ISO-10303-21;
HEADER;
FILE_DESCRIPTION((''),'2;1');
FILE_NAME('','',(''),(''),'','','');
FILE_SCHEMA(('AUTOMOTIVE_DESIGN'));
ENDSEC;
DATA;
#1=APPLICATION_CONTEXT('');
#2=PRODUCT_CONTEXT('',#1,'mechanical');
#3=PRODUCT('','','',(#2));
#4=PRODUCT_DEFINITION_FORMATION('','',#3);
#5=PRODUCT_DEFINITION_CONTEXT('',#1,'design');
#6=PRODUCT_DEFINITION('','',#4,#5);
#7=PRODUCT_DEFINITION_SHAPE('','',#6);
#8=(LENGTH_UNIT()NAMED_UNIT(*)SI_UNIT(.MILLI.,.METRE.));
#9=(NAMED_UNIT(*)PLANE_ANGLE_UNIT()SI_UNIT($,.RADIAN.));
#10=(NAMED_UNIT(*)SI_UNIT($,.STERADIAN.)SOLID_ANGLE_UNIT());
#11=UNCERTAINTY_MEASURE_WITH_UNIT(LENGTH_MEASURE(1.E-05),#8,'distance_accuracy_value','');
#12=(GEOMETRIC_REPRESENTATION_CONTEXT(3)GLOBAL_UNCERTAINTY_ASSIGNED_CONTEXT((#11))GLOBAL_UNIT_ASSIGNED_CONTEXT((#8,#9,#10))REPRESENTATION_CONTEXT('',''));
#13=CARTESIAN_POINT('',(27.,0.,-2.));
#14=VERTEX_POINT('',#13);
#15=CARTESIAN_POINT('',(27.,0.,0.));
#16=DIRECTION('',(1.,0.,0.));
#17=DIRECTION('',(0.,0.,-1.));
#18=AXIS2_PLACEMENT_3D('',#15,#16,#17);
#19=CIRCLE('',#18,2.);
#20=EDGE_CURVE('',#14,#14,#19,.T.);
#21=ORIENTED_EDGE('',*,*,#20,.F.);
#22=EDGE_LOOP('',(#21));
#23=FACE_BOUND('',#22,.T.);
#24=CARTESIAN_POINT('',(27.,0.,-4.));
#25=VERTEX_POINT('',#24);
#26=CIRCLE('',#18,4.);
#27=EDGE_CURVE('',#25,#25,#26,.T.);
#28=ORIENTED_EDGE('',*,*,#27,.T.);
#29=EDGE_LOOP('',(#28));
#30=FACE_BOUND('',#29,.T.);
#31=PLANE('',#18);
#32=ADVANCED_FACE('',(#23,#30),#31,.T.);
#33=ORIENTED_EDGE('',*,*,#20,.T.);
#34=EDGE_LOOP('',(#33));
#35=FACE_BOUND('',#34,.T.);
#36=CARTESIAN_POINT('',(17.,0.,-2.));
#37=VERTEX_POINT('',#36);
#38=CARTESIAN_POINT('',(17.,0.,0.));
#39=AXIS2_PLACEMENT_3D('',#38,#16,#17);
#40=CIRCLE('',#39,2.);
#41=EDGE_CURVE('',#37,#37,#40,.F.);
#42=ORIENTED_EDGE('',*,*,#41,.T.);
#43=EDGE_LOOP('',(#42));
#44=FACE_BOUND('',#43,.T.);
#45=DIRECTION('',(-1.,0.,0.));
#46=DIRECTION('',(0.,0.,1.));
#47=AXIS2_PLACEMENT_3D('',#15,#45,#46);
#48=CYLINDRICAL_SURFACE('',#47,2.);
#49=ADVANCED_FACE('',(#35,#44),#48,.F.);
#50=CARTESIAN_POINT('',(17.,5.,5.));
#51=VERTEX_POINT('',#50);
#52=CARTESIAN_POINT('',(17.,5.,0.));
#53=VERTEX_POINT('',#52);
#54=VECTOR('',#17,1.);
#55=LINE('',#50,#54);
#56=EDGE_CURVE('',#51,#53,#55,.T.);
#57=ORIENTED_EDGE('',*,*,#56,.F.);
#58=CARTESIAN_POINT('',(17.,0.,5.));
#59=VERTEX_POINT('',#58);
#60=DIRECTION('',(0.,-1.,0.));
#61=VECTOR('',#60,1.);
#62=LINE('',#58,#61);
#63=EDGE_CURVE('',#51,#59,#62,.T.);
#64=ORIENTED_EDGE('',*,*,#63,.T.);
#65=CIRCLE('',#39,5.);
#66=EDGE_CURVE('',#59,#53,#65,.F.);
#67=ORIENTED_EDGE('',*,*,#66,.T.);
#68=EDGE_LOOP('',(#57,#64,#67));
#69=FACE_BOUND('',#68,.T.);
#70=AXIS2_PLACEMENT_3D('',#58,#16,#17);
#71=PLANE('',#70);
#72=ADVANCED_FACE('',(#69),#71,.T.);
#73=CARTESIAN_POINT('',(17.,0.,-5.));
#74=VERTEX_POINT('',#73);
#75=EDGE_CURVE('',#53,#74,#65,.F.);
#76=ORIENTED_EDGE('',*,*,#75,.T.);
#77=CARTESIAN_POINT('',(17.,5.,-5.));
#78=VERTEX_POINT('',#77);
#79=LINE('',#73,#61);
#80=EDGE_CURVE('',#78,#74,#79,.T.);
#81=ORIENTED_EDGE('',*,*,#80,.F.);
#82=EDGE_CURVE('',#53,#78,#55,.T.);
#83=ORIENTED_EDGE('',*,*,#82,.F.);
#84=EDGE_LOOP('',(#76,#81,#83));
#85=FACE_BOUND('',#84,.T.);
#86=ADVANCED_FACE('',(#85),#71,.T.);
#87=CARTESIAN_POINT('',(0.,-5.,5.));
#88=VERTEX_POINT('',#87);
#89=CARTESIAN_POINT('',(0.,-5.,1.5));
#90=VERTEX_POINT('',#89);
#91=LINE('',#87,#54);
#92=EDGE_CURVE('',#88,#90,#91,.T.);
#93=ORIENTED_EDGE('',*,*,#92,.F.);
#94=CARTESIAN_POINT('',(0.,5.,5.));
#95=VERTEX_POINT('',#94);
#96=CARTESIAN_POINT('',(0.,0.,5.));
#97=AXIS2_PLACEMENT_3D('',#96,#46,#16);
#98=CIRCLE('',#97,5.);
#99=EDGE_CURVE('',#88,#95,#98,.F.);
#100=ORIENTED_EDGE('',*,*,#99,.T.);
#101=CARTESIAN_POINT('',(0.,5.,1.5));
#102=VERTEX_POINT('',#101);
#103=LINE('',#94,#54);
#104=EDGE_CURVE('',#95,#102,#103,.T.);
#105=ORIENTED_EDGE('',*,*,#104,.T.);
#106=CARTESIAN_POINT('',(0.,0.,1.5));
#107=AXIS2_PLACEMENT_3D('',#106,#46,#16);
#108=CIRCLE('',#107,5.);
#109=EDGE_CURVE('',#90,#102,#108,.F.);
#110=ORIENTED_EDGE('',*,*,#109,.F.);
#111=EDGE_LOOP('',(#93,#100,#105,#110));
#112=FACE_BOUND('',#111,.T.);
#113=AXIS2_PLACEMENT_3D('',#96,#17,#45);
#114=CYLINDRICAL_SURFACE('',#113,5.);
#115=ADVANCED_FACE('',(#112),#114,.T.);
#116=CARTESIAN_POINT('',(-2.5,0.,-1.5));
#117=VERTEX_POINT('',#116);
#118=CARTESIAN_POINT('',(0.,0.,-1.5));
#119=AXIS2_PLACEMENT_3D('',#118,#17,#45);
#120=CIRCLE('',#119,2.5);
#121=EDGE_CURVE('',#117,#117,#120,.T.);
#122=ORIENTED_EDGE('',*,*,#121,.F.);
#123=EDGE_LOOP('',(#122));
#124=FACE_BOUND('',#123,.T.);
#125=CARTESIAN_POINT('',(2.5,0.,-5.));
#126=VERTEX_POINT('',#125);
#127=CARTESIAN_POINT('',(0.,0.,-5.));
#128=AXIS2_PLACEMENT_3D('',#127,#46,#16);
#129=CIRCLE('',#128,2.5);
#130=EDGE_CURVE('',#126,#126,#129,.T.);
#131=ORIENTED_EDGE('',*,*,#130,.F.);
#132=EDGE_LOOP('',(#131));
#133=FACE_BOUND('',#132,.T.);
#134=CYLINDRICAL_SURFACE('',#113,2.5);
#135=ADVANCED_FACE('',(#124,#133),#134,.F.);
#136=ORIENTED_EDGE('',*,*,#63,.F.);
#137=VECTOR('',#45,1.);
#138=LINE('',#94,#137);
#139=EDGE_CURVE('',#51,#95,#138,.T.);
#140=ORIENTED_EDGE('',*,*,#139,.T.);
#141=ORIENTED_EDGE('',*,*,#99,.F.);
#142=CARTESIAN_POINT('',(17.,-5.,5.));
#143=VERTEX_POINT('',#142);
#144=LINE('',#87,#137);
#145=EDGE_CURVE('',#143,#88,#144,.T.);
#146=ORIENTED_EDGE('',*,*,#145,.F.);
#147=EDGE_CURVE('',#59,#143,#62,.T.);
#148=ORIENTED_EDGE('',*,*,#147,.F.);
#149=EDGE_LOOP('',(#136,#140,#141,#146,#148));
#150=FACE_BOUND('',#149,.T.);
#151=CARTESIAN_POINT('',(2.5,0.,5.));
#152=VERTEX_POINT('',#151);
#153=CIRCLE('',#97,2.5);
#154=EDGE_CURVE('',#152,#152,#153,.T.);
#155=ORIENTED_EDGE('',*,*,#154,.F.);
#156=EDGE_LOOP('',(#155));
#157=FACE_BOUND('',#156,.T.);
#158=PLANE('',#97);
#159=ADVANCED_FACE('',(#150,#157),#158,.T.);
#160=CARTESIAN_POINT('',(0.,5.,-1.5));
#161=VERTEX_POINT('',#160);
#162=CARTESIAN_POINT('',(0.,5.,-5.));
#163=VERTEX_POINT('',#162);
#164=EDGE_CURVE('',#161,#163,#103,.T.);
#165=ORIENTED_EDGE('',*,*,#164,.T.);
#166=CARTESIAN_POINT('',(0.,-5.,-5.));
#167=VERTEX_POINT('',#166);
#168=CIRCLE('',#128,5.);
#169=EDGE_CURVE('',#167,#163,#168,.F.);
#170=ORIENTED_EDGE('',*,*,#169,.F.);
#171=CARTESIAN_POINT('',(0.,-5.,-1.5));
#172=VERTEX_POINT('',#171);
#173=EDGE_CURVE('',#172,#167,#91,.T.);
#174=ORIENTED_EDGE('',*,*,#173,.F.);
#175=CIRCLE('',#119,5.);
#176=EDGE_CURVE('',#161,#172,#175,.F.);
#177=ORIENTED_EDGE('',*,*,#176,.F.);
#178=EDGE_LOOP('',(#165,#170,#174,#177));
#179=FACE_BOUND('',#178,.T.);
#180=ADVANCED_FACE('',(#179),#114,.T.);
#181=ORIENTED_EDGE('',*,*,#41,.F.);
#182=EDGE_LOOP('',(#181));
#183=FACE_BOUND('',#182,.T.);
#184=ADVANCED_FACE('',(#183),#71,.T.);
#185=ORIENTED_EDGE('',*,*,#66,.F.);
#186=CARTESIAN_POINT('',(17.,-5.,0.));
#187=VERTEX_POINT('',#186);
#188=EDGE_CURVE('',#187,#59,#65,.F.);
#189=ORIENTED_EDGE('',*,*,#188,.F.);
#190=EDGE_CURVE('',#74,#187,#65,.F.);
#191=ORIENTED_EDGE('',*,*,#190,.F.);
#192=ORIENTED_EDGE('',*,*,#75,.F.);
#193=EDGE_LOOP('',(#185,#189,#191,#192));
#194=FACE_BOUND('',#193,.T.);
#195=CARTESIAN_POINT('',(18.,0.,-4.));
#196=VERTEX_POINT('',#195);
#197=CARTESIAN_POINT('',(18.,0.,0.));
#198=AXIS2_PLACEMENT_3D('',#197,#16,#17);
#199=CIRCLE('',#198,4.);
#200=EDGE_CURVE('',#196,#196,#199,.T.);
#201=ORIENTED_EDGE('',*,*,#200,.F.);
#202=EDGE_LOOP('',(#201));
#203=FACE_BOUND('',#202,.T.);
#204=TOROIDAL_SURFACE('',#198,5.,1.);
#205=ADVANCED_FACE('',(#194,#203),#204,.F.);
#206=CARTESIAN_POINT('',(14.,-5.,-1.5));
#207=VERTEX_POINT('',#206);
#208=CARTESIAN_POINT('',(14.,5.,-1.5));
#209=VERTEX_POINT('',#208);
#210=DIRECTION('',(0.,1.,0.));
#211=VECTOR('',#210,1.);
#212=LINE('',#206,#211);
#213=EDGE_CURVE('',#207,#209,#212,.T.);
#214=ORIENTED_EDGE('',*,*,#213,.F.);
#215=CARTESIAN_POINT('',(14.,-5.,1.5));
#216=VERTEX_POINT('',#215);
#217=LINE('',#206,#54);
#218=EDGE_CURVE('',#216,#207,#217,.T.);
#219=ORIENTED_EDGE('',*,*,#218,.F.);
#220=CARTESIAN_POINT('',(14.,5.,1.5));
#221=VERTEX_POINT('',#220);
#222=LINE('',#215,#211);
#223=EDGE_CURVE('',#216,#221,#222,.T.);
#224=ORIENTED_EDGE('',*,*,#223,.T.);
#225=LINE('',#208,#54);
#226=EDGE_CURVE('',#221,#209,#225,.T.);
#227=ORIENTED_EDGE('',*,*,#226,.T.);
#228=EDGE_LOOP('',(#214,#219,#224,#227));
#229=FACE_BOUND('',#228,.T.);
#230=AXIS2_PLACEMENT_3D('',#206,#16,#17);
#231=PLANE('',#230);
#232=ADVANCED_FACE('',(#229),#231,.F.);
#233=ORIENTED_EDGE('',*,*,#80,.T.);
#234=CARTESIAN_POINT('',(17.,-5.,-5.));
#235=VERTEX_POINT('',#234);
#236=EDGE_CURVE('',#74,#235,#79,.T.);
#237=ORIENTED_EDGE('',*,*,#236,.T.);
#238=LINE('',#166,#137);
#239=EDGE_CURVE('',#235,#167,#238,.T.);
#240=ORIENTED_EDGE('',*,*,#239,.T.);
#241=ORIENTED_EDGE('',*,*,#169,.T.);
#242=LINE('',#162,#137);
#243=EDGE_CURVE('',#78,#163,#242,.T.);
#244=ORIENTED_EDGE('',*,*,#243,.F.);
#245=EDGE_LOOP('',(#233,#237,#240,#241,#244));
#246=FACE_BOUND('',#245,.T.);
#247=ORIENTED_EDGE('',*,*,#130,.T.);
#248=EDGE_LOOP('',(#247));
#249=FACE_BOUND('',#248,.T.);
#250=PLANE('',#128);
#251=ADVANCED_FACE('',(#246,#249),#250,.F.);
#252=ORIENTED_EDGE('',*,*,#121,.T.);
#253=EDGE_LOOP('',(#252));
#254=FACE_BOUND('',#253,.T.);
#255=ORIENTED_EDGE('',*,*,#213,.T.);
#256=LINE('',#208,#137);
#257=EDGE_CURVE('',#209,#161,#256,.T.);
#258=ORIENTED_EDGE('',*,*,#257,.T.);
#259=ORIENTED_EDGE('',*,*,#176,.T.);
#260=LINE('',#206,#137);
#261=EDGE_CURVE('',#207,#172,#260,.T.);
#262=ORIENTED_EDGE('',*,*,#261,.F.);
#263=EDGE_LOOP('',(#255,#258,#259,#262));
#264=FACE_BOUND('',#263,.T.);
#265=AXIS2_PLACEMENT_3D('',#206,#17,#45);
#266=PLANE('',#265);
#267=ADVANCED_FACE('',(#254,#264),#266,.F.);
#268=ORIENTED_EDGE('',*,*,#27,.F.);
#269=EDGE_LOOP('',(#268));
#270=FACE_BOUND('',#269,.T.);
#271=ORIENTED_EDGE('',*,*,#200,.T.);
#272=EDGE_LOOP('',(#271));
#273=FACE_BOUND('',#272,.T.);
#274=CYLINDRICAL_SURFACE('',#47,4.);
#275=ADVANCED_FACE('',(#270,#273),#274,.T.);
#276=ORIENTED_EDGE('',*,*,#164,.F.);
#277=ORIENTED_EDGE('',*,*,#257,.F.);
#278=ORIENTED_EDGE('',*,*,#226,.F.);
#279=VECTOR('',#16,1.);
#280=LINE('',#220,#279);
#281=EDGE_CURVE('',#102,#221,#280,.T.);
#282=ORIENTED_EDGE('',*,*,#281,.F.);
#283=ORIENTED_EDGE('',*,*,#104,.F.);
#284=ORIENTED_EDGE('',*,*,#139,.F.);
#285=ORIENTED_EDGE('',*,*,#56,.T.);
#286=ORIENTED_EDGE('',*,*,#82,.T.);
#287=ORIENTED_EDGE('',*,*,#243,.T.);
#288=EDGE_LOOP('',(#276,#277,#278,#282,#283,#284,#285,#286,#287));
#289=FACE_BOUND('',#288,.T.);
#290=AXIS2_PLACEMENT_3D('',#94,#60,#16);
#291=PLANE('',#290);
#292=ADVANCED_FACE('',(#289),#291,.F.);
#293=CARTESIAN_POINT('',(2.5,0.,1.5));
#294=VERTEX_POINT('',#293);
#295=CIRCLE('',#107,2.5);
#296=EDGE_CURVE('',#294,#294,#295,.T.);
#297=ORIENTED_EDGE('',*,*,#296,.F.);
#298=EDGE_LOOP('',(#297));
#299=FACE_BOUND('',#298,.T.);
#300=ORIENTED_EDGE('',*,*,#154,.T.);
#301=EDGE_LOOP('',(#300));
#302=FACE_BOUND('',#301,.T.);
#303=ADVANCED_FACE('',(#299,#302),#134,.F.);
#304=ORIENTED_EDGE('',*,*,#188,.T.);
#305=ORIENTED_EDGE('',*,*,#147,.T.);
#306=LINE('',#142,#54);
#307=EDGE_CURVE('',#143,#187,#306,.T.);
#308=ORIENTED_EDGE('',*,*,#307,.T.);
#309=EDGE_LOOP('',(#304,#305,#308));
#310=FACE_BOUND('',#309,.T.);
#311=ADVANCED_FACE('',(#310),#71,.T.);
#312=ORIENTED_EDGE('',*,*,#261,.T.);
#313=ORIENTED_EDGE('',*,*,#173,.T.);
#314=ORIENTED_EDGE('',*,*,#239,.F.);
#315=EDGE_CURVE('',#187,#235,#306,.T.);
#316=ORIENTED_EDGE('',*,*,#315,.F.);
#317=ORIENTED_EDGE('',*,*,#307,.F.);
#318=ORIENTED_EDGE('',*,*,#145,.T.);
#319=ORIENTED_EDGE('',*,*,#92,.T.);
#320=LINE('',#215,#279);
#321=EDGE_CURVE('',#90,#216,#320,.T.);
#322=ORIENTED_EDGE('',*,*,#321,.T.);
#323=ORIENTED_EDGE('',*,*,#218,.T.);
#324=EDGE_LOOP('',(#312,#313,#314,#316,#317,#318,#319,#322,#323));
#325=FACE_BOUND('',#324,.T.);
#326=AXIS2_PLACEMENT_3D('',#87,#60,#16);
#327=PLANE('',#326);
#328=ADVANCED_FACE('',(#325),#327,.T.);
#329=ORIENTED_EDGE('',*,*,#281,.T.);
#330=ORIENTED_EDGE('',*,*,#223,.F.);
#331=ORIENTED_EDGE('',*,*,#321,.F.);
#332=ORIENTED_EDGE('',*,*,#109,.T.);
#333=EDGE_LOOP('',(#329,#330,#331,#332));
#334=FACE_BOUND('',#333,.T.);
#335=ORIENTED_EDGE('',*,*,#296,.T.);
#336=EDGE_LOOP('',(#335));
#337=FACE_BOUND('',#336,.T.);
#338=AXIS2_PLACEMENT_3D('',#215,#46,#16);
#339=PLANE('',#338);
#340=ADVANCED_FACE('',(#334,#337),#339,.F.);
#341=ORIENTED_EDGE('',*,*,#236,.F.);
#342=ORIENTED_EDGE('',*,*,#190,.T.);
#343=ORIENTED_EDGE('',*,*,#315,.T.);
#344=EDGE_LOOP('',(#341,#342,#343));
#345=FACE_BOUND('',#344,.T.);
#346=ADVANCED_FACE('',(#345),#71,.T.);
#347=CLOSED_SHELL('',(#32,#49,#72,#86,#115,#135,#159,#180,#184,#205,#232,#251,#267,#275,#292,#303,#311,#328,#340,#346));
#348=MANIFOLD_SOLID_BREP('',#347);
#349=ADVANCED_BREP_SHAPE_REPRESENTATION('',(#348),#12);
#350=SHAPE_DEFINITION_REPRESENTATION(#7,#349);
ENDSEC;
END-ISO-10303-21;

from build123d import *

# Parameters (mm, degrees)
SKETCH1_R               = 2.5
BOSS_EXTRUDE1_DEPTH     = 5
CUT_EXTRUDE1_DEPTH      = 19.41195264
CUT_EXTRUDE1_DEPTH_BACK = 19.41195264
SKETCH2_W               = 19
SKETCH2_H               = 3
SKETCH3_R               = 4
SKETCH3_R_2             = 2
BOSS_EXTRUDE2_DEPTH     = 10
FILLET1_R               = 1


with BuildPart() as part:
    # Sketch1 → Boss-Extrude1 (new, symmetric)
    with BuildSketch(Plane.XY):
        with BuildLine():
            ThreePointArc((0, -5), (-5, 0), (0, 5))
            Line((0, 5), (17, 5))
            Line((17, 5), (17, -5))
            Line((17, -5), (0, -5))
        make_face()
        Circle(SKETCH1_R, mode=Mode.SUBTRACT)
    extrude(amount=BOSS_EXTRUDE1_DEPTH, both=True)

    # Sketch2 → Cut-Extrude1 (cut, two sides: drawn at the far end of the back side and taken through both)
    with BuildSketch(Plane(origin=(0, 0, 0), x_dir=(1, 0, 0), z_dir=(0, 1, 0)).offset(-CUT_EXTRUDE1_DEPTH_BACK)):
        with Locations((4.5, 0)):
            Rectangle(SKETCH2_W, SKETCH2_H)
    extrude(amount=CUT_EXTRUDE1_DEPTH + CUT_EXTRUDE1_DEPTH_BACK, mode=Mode.SUBTRACT)

    # Sketch3 → Boss-Extrude2 (add)
    with BuildSketch(Plane(origin=(17, 0, 0), x_dir=(0, 0, -1), z_dir=(1, 0, 0))):
        Circle(SKETCH3_R)
        Circle(SKETCH3_R_2, mode=Mode.SUBTRACT)
    extrude(amount=BOSS_EXTRUDE2_DEPTH)

    # Fillet1
    fillet1_edges = [part.edges().sort_by_distance(p)[0] for p in [
        (17, 0, 4),
    ]]
    fillet(fillet1_edges, radius=FILLET1_R - 0.0001)  # a hair under: the kernel refuses the full size


solid = part.part
